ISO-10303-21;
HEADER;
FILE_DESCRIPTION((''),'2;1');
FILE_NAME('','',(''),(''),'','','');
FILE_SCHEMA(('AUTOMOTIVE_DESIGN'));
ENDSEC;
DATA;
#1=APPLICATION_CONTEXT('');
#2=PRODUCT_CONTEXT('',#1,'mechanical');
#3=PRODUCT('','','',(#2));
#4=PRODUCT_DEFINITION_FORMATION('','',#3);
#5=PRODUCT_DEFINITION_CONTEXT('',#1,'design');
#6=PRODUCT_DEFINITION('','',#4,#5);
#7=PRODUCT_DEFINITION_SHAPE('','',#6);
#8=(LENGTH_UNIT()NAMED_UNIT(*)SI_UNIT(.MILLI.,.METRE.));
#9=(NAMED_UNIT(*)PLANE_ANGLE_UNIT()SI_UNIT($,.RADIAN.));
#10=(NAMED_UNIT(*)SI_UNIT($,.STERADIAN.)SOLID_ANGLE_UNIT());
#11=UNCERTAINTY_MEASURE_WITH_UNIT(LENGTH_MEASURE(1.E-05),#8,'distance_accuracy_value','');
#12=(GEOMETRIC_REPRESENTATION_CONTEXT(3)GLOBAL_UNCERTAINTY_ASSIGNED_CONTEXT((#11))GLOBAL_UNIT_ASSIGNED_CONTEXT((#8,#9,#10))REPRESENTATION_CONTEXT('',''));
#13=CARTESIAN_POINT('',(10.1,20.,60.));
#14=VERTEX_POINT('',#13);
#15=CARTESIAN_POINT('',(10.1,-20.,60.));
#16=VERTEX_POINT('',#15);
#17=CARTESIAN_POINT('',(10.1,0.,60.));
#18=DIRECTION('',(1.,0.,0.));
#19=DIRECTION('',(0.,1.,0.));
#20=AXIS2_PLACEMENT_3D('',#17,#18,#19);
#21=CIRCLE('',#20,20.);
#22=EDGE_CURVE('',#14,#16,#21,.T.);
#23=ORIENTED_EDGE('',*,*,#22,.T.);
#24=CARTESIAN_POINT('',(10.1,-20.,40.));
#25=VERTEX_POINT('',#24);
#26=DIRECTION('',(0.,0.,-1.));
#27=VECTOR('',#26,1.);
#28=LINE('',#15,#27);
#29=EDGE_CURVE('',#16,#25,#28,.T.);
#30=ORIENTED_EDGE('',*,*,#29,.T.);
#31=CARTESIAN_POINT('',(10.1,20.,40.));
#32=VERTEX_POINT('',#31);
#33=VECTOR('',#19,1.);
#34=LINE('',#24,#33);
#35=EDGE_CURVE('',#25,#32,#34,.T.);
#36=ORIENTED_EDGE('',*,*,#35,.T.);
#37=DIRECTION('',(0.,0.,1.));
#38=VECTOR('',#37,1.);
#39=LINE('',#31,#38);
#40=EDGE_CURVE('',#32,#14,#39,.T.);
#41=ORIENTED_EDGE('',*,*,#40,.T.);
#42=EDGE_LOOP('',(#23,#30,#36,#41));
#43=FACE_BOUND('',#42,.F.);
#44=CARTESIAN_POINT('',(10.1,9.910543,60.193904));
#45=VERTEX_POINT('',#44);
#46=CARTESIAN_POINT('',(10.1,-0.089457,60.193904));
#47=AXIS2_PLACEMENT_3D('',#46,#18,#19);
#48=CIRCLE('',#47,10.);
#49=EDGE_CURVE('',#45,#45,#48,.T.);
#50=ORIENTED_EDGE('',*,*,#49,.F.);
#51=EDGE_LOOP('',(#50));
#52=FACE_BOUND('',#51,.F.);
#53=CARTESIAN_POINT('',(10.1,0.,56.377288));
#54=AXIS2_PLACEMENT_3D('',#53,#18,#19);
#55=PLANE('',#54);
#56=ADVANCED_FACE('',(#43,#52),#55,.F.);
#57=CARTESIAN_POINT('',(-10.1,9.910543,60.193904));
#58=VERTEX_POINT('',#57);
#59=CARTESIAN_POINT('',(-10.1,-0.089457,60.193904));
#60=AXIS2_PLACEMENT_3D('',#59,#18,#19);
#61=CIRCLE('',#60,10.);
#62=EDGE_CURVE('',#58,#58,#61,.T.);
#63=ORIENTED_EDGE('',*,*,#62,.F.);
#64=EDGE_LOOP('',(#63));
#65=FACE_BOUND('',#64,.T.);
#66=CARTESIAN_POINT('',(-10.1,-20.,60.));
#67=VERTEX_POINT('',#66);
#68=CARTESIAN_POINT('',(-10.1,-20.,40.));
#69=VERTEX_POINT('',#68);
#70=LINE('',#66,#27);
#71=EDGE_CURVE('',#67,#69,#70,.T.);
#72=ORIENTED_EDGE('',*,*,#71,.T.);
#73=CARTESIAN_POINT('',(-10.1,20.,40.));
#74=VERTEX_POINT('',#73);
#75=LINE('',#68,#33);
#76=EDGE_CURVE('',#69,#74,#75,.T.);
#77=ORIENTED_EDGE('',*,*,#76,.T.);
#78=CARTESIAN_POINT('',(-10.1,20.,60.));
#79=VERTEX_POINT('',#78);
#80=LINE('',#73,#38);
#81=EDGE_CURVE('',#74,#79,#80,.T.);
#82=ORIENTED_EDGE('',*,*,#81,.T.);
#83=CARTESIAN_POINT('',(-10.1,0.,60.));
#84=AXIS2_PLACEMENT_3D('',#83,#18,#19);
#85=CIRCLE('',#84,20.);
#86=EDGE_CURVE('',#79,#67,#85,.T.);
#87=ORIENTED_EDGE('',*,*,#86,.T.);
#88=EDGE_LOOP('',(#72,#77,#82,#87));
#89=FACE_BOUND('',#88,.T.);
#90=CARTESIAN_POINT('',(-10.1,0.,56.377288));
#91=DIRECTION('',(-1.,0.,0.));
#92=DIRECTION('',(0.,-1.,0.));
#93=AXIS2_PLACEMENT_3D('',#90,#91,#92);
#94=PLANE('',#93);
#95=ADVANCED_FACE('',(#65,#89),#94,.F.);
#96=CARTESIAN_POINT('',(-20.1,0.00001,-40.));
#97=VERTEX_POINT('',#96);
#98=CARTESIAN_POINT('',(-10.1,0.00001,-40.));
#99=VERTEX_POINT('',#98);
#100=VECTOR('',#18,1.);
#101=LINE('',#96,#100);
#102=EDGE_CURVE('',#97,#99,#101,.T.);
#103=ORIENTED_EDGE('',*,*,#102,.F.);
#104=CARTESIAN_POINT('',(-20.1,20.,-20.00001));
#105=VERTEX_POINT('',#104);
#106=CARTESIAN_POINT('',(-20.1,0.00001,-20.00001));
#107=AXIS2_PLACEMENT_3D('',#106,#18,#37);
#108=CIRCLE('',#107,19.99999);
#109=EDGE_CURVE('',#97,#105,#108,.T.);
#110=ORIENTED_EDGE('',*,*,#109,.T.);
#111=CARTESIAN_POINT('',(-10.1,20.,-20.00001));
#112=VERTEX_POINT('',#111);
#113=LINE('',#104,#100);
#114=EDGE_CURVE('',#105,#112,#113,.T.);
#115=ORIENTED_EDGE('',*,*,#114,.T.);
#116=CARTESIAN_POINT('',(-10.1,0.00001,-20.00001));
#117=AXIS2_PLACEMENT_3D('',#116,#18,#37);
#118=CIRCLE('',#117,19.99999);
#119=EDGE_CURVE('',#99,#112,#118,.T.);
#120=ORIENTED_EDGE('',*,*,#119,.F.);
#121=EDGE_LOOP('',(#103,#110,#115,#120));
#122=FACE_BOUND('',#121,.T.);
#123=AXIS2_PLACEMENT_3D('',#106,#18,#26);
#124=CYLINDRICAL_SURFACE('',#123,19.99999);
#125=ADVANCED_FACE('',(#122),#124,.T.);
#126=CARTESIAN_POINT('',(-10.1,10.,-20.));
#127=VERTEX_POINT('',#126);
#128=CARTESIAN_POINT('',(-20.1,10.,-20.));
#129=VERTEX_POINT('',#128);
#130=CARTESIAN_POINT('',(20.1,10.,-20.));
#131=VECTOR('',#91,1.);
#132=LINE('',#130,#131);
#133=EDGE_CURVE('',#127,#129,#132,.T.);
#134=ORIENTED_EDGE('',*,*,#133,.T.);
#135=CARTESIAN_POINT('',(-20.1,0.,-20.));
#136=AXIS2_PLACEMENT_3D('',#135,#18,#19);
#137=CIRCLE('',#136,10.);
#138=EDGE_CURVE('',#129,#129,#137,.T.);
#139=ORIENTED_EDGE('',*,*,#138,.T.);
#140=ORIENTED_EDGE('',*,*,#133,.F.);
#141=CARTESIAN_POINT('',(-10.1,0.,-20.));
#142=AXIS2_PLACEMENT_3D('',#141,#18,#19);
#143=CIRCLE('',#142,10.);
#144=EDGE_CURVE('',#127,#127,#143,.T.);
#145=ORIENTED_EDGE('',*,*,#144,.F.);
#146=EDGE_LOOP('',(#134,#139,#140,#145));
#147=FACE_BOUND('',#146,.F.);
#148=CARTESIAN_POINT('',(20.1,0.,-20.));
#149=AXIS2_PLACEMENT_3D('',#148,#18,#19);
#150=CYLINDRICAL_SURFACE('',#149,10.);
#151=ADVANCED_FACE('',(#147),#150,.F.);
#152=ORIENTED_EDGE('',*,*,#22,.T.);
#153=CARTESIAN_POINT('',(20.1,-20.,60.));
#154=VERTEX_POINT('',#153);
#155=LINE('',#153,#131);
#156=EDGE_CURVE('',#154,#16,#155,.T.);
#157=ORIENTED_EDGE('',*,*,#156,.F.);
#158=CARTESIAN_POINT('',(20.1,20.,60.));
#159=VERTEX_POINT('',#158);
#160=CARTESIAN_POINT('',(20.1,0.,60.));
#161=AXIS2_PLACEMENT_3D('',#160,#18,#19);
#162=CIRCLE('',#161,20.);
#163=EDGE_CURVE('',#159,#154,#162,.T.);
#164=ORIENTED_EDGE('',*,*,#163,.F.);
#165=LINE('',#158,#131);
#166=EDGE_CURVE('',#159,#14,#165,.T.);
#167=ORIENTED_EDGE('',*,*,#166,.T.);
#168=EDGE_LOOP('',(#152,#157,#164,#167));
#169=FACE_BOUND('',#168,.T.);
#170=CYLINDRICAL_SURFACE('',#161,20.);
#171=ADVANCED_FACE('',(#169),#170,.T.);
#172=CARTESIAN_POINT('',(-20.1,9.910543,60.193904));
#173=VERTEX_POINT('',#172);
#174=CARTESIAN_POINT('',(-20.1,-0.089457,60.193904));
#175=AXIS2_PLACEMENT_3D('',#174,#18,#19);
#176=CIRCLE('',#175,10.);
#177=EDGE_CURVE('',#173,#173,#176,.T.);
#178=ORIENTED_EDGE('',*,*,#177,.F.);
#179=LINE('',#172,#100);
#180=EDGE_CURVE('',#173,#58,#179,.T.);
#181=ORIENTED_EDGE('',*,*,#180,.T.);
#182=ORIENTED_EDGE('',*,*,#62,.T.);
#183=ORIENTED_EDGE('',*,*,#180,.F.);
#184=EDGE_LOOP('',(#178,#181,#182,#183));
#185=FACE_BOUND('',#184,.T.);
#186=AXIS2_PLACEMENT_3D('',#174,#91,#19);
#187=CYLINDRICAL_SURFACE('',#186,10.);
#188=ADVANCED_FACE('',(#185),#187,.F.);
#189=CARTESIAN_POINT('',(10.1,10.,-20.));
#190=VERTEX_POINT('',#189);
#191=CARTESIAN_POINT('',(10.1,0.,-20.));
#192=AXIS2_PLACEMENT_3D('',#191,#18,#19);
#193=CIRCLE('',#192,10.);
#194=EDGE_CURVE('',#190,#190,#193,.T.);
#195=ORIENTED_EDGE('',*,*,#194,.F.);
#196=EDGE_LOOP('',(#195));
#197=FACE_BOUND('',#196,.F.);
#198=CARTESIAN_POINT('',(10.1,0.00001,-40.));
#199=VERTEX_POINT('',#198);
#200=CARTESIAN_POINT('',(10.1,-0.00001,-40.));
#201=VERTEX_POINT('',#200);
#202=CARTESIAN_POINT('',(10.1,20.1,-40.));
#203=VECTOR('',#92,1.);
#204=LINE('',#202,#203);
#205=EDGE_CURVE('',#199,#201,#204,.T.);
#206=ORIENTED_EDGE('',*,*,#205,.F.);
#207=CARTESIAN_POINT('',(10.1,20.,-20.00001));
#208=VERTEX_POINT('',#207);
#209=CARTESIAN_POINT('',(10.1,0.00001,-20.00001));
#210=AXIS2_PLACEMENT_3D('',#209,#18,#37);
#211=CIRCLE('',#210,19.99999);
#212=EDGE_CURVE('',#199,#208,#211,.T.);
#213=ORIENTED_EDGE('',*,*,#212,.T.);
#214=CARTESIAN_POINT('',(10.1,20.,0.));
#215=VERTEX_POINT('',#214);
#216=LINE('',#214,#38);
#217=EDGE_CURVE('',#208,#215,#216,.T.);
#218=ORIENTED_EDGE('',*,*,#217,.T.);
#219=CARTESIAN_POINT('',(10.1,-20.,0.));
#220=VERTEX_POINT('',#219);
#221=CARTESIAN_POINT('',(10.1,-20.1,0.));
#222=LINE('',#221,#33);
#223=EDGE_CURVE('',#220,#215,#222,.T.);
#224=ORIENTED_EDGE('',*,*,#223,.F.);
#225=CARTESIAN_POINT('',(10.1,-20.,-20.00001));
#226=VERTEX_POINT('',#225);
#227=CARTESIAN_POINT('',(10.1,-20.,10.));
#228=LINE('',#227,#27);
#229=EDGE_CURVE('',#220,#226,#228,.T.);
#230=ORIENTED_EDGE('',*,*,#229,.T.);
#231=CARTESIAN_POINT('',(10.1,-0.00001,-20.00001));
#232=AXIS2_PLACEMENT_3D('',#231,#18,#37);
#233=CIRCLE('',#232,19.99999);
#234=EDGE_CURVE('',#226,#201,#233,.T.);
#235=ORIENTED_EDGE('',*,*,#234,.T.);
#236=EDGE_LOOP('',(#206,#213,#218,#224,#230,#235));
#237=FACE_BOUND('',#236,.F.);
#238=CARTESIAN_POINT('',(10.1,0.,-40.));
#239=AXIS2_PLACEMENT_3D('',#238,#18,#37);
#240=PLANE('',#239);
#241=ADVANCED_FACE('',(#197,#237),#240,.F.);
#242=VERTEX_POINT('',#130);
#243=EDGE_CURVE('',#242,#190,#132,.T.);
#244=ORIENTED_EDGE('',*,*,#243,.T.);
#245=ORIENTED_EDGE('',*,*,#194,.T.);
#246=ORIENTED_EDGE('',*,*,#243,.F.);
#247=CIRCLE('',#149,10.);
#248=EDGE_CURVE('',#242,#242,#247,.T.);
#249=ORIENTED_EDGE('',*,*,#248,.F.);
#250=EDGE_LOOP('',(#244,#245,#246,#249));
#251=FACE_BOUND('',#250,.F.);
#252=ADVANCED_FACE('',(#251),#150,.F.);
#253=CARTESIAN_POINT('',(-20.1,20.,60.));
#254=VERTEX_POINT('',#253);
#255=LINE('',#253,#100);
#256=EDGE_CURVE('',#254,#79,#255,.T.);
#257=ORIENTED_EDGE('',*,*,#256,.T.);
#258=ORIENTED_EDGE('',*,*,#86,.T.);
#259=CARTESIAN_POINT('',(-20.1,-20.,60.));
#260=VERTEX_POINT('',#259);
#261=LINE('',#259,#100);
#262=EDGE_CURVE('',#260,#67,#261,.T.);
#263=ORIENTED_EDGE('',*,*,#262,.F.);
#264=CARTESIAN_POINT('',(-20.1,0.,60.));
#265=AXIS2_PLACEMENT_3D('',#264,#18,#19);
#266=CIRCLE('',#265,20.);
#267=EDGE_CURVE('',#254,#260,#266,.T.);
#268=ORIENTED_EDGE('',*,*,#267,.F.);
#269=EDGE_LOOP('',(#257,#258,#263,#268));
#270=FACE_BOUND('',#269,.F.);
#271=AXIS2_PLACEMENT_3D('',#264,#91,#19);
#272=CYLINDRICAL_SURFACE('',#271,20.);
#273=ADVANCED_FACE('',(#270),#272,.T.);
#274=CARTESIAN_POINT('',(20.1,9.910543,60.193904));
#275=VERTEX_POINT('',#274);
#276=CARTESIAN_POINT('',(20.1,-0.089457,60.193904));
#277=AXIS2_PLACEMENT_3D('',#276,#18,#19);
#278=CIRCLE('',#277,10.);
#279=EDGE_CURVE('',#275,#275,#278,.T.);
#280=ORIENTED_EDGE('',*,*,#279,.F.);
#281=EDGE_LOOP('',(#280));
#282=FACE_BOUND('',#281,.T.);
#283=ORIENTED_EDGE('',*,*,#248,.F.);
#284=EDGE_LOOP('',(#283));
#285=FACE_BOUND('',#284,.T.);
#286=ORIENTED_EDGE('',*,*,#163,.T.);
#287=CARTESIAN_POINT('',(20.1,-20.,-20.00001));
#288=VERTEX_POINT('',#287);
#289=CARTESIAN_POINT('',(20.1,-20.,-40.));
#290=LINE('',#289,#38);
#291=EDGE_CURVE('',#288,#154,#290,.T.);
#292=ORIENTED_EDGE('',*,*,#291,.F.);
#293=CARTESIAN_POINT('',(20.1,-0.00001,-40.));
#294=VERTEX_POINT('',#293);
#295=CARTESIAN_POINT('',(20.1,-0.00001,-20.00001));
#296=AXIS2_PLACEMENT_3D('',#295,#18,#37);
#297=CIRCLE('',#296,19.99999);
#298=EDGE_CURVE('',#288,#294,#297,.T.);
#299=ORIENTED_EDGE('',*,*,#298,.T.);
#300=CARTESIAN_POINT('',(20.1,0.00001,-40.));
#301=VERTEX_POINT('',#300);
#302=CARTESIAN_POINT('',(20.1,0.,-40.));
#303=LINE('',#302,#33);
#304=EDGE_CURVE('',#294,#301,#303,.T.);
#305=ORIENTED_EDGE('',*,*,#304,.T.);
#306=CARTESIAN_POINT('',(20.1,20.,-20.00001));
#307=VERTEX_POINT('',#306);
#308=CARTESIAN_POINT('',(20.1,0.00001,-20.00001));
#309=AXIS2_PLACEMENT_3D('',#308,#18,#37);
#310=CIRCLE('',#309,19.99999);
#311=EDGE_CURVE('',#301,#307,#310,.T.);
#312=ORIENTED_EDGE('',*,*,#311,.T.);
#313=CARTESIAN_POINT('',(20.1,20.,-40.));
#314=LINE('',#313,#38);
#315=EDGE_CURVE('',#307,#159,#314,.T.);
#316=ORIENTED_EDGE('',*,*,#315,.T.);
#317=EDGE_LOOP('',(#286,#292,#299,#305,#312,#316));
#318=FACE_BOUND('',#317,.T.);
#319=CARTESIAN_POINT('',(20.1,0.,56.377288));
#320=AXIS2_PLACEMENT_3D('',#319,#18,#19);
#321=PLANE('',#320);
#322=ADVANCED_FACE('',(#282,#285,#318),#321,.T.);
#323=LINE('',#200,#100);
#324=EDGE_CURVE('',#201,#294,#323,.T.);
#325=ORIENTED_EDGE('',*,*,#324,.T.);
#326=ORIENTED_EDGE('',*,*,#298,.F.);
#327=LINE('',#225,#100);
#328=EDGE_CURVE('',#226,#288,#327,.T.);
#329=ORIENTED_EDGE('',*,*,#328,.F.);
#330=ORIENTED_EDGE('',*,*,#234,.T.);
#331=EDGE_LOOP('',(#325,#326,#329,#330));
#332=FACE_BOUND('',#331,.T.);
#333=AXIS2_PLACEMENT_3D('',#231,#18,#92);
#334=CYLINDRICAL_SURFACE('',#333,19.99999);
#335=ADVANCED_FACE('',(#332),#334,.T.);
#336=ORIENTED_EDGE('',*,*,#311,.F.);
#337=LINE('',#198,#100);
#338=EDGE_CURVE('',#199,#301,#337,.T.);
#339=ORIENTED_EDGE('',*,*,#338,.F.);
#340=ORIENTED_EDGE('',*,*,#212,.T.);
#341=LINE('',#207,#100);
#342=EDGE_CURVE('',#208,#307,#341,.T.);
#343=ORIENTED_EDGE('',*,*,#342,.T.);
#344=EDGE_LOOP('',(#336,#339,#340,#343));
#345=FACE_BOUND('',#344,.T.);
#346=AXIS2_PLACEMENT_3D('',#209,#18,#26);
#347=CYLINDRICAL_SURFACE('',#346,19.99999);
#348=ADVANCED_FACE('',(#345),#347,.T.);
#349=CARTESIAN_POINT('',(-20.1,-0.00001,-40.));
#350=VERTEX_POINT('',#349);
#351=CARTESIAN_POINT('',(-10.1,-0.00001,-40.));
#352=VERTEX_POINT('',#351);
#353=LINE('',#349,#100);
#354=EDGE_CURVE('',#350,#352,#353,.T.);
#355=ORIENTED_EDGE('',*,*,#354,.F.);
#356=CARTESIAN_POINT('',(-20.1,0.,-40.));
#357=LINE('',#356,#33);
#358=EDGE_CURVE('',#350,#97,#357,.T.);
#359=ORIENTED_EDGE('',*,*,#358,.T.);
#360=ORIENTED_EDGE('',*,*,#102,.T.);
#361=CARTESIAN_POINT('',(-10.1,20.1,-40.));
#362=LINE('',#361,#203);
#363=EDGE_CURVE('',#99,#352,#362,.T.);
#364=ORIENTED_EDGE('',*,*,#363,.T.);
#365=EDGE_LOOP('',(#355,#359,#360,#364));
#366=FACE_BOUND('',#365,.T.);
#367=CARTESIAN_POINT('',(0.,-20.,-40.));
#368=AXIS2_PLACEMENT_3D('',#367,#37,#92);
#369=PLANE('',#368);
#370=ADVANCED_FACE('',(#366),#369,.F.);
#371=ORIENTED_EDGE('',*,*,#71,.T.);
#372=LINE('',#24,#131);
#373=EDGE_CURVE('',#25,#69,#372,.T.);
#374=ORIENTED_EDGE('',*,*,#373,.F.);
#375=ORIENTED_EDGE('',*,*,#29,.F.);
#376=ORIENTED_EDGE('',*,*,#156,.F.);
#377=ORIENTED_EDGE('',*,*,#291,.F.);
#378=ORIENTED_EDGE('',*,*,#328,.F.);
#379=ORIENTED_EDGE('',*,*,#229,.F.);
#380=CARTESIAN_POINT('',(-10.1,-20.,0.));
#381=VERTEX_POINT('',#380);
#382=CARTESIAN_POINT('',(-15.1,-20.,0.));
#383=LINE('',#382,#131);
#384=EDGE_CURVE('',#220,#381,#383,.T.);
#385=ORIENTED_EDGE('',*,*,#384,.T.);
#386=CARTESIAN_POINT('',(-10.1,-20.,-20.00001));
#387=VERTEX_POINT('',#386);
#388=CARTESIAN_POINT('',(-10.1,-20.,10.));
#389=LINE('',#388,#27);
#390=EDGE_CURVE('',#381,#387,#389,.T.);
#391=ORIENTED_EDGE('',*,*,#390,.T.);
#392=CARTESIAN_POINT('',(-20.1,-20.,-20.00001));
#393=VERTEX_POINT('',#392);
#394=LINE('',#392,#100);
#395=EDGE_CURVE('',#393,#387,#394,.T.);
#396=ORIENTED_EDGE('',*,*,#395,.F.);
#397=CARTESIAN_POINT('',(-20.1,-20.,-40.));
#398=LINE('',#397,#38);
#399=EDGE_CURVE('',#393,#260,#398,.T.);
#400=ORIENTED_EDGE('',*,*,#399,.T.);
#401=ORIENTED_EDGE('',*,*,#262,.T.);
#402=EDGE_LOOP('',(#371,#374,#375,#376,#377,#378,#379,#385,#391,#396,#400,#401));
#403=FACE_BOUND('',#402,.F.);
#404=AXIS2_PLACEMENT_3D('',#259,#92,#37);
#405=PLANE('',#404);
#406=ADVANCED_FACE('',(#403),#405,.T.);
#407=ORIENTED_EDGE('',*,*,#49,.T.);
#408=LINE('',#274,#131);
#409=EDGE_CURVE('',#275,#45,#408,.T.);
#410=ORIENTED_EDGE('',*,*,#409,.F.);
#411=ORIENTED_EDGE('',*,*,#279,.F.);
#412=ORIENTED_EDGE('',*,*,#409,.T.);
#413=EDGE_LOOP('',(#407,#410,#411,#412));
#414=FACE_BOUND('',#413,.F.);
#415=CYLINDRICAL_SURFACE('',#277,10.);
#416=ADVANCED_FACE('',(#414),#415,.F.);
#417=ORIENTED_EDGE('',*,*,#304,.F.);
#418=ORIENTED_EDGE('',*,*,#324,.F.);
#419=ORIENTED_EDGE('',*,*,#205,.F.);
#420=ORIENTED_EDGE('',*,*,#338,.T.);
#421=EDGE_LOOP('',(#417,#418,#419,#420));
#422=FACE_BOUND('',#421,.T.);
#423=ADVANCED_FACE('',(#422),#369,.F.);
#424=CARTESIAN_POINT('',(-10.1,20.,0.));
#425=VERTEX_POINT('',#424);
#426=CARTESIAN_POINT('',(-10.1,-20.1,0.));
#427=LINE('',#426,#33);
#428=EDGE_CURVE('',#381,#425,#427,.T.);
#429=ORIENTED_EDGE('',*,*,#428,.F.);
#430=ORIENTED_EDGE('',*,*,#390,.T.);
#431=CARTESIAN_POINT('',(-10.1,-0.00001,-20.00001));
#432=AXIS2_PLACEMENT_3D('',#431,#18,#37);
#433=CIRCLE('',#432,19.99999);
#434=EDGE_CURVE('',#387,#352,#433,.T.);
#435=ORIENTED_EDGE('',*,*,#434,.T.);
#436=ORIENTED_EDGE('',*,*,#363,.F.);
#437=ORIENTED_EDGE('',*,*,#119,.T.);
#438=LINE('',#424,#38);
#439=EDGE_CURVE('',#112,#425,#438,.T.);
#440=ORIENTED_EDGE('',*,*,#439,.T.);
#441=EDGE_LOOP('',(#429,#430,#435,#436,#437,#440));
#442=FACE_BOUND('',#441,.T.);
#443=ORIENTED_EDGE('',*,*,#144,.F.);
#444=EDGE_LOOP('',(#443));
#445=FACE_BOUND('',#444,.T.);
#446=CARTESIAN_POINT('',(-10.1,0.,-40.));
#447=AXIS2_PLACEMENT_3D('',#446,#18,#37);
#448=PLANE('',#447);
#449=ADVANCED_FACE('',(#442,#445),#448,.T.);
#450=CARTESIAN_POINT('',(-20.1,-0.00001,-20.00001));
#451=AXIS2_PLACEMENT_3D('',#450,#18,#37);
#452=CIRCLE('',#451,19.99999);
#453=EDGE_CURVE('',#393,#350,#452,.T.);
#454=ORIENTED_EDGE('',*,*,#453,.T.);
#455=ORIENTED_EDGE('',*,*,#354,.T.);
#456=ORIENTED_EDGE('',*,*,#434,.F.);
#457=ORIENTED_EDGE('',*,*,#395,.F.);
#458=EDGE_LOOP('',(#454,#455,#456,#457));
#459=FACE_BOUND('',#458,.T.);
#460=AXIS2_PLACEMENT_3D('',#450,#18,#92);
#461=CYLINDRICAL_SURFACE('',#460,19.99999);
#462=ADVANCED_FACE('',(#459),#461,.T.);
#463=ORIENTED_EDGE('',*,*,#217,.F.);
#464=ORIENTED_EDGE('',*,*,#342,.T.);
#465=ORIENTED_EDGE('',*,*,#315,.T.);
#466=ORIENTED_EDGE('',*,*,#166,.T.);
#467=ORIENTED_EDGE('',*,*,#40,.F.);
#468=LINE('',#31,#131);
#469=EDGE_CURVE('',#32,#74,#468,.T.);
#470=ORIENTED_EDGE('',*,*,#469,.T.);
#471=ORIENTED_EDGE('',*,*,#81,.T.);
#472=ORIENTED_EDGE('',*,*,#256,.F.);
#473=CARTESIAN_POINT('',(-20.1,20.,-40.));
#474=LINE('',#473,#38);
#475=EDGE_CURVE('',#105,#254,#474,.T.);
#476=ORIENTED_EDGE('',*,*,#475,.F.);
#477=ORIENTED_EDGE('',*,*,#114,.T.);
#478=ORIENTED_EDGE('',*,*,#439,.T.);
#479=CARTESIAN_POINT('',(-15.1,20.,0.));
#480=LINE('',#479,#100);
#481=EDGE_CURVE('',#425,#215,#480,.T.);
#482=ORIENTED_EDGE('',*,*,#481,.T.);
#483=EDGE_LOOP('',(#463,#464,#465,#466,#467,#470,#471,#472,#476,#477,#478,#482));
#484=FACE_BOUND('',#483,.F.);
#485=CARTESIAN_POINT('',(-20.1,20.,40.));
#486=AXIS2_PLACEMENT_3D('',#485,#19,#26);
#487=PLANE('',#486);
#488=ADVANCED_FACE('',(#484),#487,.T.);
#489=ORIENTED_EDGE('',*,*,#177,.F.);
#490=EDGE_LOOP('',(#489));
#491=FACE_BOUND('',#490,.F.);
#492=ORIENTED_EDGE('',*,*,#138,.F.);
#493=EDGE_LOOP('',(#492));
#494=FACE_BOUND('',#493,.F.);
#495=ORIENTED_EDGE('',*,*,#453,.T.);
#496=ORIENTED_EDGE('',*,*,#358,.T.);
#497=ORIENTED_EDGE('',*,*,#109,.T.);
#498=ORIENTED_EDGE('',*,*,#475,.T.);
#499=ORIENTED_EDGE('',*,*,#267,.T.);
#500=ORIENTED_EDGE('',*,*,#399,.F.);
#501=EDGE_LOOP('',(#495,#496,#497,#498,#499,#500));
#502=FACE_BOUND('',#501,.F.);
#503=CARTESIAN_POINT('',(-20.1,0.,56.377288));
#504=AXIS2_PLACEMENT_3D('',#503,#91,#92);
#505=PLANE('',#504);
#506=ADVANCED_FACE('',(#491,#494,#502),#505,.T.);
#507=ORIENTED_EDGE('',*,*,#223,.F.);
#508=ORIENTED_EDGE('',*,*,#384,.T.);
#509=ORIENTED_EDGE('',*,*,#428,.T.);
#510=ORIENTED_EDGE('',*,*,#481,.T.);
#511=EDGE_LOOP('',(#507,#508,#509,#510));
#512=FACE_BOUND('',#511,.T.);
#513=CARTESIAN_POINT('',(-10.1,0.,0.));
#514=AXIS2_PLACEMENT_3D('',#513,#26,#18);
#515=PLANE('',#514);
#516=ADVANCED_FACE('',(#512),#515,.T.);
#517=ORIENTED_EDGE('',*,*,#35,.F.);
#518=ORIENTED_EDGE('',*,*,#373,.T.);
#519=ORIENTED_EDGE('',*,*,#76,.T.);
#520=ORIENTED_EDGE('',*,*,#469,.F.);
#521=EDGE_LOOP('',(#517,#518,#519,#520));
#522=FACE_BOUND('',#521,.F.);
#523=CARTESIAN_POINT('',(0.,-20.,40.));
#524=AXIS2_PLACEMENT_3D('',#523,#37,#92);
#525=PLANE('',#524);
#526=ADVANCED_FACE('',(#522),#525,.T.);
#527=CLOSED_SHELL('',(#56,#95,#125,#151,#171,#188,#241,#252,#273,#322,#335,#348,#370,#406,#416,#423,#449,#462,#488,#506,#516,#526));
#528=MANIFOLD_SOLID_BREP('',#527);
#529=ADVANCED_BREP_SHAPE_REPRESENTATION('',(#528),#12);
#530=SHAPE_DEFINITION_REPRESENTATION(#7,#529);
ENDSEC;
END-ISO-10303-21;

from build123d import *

# Parameters (mm, degrees)
F0_W     = 40
F0_H     = 80
F1_DEPTH = 20.1
F2_R     = 10
F3_DEPTH = 10
F5_W     = 20.2
F5_H     = 40
F6_DEPTH = 20.1
F7_R     = 10
F8_DEPTH = 40.2
F9_R     = 19.99999


# Not quite as in the source:
# - a fillet or chamfer is up to 0.001 mm smaller than in the source, because OpenCascade refuses the exact size


with BuildPart() as f1:
    # F0 (on Right) → F1 (new body)
    with BuildSketch(Plane.YZ):
        Rectangle(F0_W, F0_H)
    extrude(amount=F1_DEPTH)

    # F2 (on face) → F3 (join)
    with BuildSketch(Plane.YZ.offset(20.1)):
        with BuildLine():
            Line((-20, 60), (-20, 40))
            Line((-20, 40), (20, 40))
            Line((20, 40), (20, 60))
            ThreePointArc((20, 60), (0, 80), (-20, 60))
        make_face()
        with Locations((-0.0894565019, 60.1939037442)):
            Circle(F2_R, mode=Mode.SUBTRACT)
    extrude(amount=-F3_DEPTH)

    # F4: F1 across face


with BuildPart() as f1_1:
    add(f1.part)
    add(f1.part.mirror(Plane(origin=(0, 0, 0), x_dir=(0, 1, 0), z_dir=(-1, 0, 0))))

    # F5 (on Front) → F6 (cut, symmetric)
    with BuildSketch(Plane.XZ):
        with Locations((0, -20)):
            Rectangle(F5_W, F5_H)
    extrude(amount=F6_DEPTH, both=True, mode=Mode.SUBTRACT)

    # F7 (on face) → F8 (cut)
    with BuildSketch(Plane.YZ.offset(20.1)):
        with Locations((0, -20)):
            Circle(F7_R)
    extrude(amount=-F8_DEPTH, mode=Mode.SUBTRACT)

    # F9 (radius 20 in the source; OpenCascade refuses exactly that, so slightly less here)
    f9_edges = [f1_1.edges().sort_by_distance(p)[0] for p in [
        (-15.1, -20, -40),
        (15.1, -20, -40),
        (15.1, 20, -40),
        (-15.1, 20, -40),
    ]]
    fillet(f9_edges, radius=F9_R)


solid = f1_1.part
